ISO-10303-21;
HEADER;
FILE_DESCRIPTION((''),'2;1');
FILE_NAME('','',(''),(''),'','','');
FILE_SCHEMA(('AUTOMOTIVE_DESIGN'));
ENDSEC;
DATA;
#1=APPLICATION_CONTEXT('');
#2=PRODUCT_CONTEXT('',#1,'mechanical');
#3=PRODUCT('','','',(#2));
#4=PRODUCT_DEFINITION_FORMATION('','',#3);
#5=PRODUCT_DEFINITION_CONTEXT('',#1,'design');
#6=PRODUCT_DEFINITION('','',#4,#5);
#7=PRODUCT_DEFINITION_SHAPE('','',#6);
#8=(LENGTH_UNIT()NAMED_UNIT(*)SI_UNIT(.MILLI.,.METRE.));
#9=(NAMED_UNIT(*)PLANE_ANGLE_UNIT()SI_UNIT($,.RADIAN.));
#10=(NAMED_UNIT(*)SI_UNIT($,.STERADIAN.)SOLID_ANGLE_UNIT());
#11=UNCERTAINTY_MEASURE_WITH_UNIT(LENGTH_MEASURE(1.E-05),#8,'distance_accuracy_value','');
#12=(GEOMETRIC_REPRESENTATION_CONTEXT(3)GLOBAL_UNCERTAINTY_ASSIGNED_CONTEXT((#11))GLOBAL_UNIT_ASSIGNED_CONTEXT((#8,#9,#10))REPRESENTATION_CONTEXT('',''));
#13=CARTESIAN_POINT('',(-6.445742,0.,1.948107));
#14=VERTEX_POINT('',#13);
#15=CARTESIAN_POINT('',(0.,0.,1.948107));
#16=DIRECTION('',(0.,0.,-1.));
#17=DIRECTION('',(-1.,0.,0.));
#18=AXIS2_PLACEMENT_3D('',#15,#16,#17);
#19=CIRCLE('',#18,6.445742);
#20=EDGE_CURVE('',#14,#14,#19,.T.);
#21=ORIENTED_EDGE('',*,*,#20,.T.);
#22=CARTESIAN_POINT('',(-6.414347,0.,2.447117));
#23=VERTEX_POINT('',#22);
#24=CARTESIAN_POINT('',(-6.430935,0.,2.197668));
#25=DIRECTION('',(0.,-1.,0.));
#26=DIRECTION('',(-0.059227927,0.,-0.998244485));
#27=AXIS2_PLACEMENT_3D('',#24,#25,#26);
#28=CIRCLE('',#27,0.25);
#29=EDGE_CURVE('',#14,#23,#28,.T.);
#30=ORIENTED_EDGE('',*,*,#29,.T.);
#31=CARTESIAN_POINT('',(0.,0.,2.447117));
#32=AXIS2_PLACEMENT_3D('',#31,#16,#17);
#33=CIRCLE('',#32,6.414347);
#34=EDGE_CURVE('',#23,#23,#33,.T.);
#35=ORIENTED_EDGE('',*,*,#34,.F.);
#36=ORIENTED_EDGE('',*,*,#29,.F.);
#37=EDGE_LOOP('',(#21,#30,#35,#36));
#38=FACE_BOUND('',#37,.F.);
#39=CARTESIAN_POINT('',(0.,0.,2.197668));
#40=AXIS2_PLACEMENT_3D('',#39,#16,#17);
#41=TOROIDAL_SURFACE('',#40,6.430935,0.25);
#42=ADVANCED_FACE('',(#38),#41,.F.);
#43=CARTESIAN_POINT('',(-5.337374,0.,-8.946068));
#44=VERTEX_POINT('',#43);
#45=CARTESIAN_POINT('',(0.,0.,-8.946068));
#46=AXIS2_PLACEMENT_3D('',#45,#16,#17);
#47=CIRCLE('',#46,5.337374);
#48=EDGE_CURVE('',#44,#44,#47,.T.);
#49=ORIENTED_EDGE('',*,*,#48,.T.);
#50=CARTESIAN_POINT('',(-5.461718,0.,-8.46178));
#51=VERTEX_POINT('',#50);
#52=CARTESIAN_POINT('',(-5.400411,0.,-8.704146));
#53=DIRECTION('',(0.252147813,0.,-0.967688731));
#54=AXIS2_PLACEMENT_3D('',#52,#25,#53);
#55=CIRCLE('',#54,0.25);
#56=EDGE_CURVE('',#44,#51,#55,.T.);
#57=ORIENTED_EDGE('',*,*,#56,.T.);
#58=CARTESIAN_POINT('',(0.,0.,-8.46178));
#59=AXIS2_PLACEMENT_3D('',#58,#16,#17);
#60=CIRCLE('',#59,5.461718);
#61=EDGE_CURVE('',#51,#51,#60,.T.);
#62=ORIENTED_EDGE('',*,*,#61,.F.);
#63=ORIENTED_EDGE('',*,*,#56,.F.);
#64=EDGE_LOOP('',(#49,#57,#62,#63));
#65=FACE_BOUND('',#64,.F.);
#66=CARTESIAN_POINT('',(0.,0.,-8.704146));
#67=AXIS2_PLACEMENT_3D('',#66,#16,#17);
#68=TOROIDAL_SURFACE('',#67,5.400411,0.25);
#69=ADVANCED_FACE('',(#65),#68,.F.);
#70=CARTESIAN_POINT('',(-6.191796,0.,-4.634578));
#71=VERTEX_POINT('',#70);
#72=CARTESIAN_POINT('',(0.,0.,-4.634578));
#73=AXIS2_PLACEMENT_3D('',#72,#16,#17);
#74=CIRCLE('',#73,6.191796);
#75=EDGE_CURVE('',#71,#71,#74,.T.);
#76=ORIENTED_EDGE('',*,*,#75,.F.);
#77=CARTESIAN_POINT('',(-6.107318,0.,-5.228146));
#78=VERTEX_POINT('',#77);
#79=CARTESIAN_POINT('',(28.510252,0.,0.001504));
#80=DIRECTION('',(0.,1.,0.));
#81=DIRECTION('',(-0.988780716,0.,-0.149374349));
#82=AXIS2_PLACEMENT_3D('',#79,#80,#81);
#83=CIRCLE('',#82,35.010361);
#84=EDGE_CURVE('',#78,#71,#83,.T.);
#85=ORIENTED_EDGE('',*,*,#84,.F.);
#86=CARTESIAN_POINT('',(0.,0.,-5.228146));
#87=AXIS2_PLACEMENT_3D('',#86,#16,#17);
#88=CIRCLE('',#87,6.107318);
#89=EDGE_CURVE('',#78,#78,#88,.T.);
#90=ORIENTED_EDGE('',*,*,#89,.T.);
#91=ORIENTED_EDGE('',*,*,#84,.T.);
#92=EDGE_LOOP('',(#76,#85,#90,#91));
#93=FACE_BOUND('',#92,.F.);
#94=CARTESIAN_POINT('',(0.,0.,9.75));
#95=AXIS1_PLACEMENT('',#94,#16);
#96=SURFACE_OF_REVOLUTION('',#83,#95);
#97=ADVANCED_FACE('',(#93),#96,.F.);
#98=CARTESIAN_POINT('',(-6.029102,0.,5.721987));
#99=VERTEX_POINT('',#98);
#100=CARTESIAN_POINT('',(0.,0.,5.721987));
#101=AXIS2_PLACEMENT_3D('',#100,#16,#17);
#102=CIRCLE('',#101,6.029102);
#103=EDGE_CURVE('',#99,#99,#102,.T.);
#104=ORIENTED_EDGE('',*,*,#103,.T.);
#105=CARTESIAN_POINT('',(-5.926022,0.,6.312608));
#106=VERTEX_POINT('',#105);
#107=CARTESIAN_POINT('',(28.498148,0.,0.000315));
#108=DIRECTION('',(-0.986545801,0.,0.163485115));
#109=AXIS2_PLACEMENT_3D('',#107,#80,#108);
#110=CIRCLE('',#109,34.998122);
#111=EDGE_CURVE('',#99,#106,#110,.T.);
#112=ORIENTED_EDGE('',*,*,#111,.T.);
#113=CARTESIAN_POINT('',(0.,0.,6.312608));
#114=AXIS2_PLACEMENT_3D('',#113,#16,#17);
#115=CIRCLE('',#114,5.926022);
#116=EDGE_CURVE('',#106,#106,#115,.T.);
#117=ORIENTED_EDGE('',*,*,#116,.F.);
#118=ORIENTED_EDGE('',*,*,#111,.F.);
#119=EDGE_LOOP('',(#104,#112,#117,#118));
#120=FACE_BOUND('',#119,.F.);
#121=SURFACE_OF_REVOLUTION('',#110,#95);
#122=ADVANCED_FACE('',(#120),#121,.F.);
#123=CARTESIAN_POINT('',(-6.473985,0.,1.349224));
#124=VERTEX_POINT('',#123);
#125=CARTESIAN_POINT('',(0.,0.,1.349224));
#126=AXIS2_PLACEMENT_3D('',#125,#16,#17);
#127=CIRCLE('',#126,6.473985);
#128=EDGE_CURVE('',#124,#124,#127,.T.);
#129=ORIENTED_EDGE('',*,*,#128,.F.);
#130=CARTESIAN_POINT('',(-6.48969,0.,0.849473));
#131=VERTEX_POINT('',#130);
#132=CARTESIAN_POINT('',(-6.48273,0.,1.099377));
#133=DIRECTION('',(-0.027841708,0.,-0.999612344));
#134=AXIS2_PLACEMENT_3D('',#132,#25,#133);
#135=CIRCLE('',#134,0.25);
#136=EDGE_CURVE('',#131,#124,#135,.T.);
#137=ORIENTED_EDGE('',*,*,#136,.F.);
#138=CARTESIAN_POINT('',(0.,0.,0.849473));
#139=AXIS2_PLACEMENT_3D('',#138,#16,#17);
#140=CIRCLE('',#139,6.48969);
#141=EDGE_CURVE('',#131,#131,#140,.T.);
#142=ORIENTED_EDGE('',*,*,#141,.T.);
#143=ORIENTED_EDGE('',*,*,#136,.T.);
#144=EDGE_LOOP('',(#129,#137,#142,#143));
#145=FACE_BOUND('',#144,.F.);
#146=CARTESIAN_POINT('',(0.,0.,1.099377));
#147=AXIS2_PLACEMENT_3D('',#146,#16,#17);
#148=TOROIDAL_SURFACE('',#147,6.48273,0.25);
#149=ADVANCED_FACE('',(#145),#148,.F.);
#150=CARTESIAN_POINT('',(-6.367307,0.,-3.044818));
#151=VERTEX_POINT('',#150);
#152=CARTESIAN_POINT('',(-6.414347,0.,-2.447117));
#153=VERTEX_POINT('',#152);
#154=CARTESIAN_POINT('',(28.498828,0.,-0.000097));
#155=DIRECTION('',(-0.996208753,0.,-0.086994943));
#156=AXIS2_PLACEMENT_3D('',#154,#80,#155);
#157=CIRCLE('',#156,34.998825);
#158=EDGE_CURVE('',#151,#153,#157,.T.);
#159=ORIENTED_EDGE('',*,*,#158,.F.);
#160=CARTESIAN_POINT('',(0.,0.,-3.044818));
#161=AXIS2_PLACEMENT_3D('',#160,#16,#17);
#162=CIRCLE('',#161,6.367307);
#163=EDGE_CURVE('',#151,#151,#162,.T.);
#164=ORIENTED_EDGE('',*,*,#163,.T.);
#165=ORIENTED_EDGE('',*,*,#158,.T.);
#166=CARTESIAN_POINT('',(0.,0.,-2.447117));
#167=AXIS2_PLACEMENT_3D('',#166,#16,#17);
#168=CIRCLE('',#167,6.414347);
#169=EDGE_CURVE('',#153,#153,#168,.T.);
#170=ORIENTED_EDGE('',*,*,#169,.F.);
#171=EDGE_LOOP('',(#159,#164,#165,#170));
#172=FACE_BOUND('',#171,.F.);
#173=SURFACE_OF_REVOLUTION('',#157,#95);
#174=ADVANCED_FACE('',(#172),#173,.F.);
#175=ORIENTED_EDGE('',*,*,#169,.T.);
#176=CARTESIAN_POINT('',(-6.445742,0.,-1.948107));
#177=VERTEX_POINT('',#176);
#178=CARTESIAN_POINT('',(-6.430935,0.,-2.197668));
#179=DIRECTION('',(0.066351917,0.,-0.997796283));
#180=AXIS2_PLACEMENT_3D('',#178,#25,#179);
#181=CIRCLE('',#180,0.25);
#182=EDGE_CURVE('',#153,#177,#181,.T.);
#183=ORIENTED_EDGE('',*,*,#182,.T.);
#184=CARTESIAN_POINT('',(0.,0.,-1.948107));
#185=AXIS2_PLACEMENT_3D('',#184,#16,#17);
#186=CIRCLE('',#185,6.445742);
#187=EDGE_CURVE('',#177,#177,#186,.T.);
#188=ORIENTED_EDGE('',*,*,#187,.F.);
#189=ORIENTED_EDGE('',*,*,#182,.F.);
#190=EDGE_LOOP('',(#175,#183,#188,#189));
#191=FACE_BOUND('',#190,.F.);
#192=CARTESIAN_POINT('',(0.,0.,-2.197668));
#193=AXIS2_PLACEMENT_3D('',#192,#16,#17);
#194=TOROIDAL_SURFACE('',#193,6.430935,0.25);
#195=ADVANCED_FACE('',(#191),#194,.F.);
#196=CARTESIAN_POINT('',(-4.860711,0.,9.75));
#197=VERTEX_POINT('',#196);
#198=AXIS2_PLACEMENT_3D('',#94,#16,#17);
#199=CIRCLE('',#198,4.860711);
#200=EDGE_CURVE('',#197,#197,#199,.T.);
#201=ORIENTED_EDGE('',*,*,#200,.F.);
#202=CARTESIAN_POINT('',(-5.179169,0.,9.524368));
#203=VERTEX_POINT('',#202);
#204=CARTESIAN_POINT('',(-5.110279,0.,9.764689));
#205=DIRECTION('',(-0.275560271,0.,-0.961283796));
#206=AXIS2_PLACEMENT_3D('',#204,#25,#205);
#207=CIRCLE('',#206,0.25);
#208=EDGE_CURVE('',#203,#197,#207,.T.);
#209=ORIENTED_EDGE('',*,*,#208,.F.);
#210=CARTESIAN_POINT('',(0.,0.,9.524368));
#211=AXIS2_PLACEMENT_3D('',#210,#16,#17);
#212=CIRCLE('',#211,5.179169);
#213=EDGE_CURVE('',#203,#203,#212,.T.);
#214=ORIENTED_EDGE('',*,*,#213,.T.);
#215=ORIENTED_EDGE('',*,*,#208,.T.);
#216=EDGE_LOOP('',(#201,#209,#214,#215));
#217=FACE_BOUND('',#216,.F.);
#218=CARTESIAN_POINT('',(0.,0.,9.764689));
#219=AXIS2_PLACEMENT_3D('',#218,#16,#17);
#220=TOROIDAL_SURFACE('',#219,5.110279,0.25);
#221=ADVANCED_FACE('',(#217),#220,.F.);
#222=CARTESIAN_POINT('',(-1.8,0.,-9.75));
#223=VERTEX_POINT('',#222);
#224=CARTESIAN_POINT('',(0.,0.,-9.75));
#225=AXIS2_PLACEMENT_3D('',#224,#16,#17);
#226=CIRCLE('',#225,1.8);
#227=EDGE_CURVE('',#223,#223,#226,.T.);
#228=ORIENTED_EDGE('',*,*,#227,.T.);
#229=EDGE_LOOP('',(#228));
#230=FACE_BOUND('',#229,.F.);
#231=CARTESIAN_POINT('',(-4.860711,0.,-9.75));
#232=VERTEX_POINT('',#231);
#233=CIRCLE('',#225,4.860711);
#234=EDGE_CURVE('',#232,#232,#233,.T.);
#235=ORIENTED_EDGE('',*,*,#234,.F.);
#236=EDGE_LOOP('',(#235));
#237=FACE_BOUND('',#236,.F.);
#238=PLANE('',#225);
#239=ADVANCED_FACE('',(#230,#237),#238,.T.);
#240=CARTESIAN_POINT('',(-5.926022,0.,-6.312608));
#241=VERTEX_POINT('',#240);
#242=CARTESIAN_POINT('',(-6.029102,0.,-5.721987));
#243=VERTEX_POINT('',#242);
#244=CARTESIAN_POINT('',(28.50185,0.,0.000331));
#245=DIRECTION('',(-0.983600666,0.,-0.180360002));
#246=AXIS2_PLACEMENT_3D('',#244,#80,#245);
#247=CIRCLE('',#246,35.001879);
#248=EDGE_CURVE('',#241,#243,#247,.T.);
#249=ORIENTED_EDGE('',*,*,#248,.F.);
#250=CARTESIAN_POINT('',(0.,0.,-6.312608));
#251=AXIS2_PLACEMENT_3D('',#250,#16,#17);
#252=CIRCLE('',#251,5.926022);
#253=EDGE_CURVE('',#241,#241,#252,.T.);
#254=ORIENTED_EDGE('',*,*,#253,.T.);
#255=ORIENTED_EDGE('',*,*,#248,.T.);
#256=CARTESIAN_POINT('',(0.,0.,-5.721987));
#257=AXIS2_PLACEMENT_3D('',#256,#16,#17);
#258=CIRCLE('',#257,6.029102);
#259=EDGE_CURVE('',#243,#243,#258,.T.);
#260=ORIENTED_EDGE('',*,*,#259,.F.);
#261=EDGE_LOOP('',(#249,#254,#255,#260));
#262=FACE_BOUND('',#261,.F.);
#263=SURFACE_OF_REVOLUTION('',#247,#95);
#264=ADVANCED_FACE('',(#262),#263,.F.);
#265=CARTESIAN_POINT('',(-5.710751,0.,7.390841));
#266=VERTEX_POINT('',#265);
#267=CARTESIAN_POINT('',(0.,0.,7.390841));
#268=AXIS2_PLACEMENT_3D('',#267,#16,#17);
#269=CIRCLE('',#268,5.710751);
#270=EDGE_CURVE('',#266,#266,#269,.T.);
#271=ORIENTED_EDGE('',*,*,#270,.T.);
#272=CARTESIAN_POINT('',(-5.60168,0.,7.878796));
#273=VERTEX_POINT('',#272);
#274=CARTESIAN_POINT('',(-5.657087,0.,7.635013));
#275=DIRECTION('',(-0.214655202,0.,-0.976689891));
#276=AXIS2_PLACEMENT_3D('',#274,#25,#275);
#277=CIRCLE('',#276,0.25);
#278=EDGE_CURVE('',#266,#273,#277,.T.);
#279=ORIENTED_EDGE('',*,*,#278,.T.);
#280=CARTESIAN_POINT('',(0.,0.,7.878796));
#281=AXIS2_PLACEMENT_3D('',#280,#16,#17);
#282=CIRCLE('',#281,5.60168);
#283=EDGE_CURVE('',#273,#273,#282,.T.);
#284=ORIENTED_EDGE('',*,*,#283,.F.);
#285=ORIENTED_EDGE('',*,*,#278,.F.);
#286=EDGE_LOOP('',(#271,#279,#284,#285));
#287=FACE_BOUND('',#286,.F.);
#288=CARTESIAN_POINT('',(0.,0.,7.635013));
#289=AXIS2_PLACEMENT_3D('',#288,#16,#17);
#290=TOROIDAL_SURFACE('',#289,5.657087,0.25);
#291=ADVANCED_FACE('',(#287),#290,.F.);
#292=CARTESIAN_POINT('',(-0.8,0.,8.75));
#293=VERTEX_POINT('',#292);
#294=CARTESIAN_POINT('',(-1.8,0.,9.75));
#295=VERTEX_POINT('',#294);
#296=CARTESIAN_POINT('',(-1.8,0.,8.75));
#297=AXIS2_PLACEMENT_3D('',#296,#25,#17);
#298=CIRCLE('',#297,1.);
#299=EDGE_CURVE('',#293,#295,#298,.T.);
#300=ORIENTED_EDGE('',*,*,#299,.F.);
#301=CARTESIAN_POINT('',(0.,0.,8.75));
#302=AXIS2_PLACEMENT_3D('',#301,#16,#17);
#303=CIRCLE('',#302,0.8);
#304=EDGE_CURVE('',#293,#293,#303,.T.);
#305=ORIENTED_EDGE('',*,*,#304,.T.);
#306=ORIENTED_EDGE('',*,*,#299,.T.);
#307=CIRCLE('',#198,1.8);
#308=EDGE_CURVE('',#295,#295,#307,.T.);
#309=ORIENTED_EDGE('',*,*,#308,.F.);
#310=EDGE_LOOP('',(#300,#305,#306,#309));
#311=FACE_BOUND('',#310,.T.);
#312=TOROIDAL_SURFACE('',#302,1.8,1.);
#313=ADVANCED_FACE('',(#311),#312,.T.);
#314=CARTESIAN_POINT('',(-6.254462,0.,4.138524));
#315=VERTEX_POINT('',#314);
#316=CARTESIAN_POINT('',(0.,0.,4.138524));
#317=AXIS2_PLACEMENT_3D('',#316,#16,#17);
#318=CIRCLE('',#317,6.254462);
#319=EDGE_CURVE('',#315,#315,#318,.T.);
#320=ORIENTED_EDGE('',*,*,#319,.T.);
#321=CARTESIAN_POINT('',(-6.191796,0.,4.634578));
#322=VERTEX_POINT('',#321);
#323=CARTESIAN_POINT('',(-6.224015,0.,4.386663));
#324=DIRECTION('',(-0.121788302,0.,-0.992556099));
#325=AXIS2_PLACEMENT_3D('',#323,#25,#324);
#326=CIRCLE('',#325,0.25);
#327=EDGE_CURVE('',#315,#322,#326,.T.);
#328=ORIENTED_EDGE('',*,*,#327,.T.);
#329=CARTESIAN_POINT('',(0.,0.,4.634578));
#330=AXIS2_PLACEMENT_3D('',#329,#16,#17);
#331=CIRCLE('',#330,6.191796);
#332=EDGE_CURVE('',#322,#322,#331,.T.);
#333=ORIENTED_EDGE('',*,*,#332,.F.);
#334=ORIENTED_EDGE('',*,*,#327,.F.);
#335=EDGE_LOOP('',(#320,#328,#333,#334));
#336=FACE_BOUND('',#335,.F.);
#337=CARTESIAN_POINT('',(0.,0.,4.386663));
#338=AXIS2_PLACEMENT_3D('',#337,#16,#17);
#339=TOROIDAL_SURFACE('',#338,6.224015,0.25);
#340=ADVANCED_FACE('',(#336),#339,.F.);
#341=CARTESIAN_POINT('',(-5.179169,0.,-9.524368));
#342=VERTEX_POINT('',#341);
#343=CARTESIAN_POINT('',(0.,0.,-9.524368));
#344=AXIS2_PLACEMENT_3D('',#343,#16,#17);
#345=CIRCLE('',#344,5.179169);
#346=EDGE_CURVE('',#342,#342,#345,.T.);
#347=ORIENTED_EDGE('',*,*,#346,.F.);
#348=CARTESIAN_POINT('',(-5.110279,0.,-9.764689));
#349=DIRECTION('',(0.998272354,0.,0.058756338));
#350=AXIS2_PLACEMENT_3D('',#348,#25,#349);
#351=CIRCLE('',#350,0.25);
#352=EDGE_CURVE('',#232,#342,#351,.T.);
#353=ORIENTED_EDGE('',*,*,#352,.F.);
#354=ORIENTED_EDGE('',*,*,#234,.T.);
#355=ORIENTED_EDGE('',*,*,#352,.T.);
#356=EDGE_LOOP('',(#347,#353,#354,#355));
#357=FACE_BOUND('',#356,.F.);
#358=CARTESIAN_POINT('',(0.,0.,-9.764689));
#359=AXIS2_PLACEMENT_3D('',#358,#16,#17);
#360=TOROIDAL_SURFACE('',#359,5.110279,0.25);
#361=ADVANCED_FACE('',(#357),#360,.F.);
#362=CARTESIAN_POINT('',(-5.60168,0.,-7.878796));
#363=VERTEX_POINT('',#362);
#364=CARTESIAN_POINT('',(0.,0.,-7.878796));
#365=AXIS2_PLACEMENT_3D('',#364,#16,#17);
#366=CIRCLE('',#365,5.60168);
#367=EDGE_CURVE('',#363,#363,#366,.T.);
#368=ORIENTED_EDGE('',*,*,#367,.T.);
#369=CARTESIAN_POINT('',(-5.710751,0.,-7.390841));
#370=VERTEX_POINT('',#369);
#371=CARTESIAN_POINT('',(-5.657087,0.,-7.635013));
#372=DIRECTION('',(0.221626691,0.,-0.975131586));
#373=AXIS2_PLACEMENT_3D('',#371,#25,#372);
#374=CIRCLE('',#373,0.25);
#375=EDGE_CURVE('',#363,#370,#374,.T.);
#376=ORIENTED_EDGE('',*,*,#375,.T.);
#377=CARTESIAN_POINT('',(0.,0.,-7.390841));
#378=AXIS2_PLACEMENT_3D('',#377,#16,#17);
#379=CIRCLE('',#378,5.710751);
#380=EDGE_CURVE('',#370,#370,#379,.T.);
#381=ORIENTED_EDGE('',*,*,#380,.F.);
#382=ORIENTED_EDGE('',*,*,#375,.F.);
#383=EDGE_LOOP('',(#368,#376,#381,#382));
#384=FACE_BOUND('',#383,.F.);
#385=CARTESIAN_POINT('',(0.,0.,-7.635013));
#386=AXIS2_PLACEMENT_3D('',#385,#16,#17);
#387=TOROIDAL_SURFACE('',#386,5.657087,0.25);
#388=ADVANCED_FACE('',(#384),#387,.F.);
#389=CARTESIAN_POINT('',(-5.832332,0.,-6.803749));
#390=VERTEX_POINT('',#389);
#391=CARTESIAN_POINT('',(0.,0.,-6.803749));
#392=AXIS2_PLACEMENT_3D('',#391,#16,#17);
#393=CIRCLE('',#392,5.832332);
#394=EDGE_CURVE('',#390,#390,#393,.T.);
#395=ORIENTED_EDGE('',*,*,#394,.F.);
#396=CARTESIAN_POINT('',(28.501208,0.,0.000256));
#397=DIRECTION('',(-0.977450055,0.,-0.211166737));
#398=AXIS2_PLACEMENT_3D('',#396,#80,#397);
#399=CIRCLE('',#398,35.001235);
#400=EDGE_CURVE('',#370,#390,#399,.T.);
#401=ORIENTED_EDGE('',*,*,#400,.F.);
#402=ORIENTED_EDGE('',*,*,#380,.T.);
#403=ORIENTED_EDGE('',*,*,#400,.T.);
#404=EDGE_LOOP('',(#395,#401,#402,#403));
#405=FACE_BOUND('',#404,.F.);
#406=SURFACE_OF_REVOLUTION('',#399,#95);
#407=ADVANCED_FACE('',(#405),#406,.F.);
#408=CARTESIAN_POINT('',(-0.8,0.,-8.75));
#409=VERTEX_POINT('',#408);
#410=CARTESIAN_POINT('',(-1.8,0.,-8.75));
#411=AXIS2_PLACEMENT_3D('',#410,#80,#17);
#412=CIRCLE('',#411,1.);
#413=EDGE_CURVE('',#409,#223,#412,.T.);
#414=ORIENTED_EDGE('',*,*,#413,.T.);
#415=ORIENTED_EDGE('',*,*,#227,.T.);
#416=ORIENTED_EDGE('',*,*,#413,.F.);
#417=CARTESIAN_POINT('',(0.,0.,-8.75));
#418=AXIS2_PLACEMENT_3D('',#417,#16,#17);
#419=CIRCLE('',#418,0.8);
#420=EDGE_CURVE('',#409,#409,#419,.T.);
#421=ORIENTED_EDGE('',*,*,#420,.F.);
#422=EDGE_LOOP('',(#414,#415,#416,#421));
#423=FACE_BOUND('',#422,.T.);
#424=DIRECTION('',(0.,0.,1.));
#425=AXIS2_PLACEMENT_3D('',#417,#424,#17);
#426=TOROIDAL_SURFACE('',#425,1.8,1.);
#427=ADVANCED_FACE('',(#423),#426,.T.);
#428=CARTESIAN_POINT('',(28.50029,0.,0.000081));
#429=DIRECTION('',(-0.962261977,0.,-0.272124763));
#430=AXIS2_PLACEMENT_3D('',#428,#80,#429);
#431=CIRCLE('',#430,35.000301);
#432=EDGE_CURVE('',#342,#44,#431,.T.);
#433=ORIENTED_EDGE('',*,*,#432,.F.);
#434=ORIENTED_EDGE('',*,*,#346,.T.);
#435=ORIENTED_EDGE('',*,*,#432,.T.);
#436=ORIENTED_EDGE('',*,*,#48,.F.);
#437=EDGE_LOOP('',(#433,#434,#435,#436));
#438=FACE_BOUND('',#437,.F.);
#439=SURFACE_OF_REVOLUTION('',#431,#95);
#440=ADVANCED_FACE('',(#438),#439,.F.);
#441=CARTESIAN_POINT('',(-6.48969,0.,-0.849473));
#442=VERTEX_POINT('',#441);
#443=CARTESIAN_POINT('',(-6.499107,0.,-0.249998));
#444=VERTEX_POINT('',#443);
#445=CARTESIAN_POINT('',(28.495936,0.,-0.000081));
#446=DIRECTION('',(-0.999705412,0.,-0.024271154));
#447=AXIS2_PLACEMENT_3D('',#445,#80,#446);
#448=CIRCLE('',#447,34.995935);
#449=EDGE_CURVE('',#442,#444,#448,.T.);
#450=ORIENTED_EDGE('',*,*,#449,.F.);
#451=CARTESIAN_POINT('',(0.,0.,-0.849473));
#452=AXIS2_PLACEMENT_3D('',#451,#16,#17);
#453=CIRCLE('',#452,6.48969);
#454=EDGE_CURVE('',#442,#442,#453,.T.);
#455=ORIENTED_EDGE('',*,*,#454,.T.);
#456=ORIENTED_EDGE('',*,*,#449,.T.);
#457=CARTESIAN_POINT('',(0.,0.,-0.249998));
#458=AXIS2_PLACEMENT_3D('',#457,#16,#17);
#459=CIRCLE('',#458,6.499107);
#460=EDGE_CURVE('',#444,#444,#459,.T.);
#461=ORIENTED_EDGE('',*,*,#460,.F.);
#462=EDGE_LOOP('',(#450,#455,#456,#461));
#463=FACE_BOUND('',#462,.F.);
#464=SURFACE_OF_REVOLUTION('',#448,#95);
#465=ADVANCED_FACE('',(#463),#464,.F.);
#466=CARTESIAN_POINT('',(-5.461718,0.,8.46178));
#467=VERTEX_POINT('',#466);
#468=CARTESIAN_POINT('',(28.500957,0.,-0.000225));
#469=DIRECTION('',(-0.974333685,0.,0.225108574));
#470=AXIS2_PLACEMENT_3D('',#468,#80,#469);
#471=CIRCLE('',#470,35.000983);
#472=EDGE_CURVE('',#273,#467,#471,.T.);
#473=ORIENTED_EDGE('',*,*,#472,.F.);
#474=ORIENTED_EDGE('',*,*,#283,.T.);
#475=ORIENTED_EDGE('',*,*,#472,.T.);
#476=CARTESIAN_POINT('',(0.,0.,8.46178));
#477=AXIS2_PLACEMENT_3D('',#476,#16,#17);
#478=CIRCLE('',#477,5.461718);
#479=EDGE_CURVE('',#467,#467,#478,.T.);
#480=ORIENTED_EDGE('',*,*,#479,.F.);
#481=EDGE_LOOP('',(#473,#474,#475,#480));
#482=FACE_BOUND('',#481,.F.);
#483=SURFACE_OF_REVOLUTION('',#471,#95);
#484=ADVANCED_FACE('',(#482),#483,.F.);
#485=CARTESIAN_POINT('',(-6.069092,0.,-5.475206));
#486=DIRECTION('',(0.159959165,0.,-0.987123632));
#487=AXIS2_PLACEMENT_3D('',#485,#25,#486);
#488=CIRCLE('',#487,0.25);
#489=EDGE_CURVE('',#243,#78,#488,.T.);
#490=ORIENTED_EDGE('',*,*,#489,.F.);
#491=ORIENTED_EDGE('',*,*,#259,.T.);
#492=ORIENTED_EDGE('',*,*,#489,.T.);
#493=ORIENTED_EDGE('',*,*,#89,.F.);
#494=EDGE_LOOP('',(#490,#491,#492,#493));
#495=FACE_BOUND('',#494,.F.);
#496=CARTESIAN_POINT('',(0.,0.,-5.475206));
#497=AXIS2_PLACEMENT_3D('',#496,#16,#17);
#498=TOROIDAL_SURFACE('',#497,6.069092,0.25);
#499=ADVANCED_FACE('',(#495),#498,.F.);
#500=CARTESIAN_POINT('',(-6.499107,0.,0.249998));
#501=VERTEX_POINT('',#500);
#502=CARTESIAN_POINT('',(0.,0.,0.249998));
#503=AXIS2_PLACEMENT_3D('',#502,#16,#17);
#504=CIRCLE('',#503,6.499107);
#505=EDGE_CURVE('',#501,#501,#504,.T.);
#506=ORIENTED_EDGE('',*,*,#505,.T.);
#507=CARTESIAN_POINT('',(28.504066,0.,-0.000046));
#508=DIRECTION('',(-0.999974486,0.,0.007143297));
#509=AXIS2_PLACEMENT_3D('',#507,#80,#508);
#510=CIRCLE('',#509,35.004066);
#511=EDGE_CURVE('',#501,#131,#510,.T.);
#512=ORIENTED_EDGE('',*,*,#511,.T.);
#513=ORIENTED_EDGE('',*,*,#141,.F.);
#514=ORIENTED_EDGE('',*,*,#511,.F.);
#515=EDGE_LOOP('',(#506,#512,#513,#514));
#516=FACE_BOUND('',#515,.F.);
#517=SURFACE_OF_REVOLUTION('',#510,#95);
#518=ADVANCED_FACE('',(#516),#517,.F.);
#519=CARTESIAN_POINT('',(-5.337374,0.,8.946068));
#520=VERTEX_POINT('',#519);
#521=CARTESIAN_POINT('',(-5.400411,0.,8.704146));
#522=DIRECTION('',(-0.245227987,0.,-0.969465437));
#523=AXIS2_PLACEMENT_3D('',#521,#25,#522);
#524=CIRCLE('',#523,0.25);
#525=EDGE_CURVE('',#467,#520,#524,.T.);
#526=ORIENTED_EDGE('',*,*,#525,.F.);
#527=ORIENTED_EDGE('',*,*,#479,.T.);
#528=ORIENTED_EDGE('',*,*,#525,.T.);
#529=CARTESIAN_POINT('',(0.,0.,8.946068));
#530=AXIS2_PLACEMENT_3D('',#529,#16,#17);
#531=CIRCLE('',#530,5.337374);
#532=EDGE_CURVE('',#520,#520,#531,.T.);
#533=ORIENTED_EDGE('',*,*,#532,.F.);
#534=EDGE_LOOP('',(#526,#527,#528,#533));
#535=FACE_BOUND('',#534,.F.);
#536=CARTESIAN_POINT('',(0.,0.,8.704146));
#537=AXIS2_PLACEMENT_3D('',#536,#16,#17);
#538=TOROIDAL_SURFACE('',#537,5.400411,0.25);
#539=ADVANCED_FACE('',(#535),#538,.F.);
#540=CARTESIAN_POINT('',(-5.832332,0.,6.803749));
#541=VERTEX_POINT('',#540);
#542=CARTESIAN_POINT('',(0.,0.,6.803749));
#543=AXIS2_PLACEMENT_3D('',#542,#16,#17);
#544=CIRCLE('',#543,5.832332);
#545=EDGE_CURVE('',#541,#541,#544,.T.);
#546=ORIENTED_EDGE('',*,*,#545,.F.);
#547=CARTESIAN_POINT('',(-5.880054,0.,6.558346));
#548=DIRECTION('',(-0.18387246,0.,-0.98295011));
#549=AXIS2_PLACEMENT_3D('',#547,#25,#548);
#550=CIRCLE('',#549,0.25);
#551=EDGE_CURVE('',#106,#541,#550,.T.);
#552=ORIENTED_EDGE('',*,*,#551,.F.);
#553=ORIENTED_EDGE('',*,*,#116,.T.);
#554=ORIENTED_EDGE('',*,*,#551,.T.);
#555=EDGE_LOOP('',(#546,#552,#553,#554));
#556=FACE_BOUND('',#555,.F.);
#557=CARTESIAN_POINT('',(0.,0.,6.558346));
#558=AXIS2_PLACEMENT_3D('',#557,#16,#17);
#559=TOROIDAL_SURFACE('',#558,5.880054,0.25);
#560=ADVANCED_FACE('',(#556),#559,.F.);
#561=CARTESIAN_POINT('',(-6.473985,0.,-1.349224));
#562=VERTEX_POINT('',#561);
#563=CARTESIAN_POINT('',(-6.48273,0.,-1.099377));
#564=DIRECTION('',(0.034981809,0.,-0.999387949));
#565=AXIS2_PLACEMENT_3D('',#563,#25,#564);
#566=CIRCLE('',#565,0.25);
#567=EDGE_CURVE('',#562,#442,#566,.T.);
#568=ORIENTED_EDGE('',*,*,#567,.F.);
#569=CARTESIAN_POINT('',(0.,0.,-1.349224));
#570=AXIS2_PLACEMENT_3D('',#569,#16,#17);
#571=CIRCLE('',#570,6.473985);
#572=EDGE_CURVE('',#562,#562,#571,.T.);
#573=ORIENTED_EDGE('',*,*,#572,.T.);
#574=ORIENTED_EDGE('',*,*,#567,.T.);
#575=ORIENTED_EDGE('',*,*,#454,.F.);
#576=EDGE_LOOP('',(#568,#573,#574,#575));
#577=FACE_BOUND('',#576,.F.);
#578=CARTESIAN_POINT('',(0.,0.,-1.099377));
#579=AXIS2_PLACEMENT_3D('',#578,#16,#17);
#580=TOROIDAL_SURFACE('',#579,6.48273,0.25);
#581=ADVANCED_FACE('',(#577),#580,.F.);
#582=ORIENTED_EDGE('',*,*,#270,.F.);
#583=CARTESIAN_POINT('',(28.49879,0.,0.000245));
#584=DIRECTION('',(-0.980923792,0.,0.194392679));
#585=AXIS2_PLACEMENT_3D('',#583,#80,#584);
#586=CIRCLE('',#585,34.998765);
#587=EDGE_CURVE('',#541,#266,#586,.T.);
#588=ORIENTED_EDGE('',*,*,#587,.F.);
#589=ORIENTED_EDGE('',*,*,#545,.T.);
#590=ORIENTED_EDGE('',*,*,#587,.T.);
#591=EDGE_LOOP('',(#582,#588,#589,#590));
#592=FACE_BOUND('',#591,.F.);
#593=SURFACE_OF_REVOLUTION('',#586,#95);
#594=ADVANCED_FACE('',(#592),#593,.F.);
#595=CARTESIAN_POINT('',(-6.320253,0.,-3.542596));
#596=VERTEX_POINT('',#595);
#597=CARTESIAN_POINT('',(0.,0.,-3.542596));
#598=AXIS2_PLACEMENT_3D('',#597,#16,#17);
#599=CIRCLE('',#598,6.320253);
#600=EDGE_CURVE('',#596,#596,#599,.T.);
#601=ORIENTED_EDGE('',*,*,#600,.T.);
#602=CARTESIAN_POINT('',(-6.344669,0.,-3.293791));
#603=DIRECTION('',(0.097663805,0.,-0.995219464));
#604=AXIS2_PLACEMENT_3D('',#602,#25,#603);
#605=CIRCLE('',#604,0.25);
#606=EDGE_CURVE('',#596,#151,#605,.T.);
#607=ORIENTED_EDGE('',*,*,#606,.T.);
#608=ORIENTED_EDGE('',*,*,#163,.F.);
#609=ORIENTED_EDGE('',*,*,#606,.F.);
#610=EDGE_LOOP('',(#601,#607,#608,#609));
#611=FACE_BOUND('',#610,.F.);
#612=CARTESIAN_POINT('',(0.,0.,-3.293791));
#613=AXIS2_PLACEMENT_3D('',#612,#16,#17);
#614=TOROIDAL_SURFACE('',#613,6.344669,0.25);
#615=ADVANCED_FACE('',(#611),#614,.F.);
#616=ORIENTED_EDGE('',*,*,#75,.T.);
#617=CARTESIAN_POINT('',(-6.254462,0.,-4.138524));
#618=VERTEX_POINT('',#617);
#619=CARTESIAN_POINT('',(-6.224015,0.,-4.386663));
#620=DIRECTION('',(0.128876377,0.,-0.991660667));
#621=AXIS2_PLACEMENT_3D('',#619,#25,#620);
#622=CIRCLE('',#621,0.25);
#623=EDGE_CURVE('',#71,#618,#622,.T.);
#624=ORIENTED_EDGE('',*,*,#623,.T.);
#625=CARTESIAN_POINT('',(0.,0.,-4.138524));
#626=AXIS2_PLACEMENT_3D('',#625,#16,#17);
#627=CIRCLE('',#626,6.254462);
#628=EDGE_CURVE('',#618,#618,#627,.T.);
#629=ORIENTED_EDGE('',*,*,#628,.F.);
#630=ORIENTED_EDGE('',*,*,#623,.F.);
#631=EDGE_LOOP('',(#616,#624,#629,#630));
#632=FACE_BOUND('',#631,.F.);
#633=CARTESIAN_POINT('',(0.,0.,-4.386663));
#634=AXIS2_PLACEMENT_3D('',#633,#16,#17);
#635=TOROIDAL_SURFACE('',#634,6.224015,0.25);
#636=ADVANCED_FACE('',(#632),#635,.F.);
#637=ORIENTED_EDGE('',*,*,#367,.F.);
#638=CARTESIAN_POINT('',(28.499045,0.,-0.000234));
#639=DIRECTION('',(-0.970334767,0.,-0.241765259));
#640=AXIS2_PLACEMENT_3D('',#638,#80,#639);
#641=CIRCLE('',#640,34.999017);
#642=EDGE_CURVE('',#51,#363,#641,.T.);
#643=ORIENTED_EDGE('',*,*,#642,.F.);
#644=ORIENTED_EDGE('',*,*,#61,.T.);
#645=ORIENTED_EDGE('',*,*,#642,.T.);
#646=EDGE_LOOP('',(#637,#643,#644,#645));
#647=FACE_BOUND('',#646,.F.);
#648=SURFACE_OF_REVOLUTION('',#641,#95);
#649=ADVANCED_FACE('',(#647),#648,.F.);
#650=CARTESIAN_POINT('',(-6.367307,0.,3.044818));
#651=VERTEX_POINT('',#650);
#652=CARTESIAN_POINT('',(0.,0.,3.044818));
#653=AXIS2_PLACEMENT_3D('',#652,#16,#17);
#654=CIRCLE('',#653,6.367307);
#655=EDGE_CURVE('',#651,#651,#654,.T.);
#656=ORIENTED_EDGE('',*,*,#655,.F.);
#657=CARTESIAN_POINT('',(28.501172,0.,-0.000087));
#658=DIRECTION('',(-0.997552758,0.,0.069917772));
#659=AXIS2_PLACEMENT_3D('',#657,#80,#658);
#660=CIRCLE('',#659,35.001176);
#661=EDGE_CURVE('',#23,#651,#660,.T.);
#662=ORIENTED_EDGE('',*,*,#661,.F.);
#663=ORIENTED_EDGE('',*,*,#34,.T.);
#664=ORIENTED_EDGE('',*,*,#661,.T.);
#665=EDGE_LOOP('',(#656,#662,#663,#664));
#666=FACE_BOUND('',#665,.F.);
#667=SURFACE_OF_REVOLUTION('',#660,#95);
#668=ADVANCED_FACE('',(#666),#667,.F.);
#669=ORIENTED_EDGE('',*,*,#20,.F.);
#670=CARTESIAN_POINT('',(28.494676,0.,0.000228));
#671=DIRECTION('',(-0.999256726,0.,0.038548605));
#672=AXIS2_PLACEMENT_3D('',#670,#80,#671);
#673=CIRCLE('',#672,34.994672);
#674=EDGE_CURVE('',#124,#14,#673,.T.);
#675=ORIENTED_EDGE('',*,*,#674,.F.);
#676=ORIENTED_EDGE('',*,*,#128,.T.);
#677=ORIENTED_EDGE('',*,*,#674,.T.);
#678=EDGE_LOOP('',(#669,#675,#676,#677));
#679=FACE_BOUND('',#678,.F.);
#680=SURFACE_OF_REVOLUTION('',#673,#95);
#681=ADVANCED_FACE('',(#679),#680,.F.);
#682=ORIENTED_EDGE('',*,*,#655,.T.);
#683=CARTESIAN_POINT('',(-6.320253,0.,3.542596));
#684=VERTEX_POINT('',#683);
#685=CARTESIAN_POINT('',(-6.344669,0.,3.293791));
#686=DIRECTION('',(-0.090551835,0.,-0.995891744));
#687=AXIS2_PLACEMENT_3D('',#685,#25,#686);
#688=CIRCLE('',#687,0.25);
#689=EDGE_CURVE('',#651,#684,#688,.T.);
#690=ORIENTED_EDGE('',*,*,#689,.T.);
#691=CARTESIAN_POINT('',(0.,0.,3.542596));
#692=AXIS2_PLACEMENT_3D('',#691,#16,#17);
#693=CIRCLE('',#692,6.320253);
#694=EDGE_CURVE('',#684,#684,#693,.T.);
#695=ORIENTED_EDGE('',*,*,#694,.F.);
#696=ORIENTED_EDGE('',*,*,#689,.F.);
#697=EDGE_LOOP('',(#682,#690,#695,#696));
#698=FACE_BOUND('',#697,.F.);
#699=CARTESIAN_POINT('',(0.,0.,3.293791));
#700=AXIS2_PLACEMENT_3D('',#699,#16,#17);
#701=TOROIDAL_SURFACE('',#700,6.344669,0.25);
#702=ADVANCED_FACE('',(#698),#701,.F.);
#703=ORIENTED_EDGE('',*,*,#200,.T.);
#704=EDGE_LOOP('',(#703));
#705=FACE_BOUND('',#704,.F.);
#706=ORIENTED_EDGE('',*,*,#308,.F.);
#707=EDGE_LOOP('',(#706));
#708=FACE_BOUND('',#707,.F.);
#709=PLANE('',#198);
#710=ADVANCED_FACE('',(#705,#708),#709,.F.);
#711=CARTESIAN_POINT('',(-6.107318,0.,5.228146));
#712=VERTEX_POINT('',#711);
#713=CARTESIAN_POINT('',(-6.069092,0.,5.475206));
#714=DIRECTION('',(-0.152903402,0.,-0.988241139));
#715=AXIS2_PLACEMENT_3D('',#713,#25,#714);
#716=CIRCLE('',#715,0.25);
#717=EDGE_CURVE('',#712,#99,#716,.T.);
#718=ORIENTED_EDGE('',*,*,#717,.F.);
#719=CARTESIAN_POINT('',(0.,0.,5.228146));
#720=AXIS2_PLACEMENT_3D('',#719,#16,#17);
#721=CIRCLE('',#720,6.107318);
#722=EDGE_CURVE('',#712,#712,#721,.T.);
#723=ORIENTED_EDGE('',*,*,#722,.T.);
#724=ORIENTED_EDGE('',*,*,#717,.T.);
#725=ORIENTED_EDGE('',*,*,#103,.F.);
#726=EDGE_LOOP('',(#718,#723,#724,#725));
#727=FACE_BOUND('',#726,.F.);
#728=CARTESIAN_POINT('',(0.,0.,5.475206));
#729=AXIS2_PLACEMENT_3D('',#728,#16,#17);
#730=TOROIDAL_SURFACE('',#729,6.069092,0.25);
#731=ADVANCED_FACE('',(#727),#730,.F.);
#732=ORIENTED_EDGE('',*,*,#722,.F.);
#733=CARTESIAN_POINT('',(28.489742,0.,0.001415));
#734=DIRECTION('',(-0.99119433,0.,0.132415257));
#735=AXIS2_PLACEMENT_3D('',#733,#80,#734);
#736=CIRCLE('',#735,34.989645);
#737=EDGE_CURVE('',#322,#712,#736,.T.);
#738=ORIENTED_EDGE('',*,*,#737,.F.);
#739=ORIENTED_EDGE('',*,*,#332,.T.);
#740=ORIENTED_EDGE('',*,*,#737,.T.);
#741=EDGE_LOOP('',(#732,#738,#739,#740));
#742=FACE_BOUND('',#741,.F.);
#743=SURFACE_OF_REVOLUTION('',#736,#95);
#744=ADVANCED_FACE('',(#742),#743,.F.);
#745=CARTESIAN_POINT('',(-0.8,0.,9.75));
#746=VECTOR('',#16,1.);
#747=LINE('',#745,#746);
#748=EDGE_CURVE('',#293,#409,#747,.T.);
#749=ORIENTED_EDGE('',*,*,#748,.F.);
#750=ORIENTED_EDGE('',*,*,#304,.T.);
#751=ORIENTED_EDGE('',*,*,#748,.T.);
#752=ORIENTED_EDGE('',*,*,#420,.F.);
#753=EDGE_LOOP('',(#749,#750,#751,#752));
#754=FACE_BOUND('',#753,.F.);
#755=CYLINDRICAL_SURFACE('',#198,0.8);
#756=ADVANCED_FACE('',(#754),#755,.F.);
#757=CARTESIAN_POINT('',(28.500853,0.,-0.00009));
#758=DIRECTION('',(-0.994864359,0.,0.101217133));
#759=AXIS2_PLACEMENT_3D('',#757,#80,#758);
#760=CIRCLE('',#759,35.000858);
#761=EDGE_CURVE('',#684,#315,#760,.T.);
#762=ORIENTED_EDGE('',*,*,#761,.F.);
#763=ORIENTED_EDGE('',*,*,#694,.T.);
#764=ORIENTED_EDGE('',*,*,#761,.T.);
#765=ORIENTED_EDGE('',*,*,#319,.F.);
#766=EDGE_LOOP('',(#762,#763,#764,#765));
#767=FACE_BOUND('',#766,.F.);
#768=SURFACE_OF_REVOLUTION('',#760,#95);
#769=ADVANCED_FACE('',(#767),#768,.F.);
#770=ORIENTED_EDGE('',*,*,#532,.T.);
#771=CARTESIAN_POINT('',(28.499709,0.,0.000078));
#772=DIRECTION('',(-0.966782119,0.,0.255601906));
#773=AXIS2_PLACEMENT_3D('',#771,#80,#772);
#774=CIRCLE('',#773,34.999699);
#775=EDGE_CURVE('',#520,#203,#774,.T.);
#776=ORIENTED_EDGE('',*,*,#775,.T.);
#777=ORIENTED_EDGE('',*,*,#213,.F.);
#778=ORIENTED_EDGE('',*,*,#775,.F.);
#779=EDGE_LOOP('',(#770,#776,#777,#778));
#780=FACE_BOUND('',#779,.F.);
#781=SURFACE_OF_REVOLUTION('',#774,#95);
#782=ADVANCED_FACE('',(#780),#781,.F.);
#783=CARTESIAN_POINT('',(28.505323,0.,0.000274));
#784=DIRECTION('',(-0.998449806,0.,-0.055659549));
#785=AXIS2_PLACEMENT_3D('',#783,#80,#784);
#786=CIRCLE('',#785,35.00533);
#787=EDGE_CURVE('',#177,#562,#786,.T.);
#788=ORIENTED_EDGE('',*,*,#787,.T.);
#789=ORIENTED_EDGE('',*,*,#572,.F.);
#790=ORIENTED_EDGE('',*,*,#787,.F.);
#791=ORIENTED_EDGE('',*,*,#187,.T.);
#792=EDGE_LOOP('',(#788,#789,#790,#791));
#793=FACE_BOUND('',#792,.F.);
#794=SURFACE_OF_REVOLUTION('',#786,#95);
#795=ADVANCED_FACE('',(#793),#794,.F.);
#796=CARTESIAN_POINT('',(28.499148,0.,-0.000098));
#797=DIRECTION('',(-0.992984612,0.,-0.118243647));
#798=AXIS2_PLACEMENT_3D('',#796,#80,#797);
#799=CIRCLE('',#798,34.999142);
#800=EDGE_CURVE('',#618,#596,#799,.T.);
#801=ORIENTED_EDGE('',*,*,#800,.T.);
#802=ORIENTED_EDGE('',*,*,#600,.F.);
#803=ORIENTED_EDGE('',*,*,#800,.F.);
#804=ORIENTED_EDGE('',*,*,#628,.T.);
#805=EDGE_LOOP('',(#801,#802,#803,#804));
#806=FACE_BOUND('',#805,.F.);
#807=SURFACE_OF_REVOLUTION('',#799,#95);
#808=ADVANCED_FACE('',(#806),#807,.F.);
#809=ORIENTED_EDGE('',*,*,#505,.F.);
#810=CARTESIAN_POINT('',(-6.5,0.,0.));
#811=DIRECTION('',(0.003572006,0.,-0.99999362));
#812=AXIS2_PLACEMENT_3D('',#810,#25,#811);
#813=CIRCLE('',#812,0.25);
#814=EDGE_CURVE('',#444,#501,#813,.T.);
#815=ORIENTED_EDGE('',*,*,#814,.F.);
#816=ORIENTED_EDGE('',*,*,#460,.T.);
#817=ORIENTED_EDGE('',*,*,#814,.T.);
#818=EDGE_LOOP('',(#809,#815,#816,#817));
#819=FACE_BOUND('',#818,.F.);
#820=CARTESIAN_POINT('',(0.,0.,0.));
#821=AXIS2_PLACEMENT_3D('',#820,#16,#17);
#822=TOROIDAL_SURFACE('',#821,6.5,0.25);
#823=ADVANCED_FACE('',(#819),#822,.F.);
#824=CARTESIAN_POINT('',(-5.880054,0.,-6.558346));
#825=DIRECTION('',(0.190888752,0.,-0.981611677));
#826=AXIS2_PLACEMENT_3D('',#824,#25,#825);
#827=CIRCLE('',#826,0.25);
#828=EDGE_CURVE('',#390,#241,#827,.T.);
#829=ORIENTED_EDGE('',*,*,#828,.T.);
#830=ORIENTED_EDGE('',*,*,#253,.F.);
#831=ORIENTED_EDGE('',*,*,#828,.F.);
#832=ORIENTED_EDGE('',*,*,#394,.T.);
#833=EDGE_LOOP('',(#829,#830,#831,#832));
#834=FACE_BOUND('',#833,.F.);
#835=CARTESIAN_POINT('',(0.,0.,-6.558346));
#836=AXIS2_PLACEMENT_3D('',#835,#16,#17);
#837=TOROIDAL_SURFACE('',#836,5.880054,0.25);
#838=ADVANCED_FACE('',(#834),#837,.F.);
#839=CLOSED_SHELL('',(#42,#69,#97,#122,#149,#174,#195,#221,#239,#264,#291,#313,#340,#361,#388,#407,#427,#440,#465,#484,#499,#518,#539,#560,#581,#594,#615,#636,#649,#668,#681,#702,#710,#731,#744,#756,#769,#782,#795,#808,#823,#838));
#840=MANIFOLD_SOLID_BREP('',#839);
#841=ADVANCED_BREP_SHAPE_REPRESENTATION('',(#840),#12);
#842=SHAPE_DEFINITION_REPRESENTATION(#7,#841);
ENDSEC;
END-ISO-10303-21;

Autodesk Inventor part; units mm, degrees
ref_plane "YZ Plane" through (0, 0, 0) normal (1, 0, 0) x (0, 1, 0)
ref_plane "XZ Plane" through (0, 0, 0) normal (0, 1, 0) x (-1, 0, 0)
ref_plane "XY Plane" through (0, 0, 0) normal (0, 0, 1) x (1, 0, 0)
sketch "Sketch1" plane through (0, 0, 0) normal (0, 1, 0) x (-1, 0, 0)
  line L0 (6.5, 9.75) -> (0, 9.75)
  line L1 (0, 9.75) -> (0, -9.75)
  line L2 (0, -9.75) -> (6.5, -9.75)
  line L3 (6.5, -9.75) -> (6.5, 9.75)
  line L4 (0.8, 9.75) -> (0.8, -9.75)
  arc A0 (5.114543, -9.75) -> (5.114543, 9.75) centre (-28.5, 0) ccw
  circle A1 centre (6.5, 0) radius 0.25
  circle A2 centre (6.48273, 1.099377) radius 0.25
  circle A3 centre (6.430935, 2.197668) radius 0.25
  circle A4 centre (6.344669, 3.293791) radius 0.25
  circle A5 centre (6.224015, 4.386663) radius 0.25
  circle A6 centre (6.069092, 5.475206) radius 0.25
  circle A7 centre (5.880054, 6.558346) radius 0.25
  circle A8 centre (5.657087, 7.635013) radius 0.25
  circle A9 centre (5.400411, 8.704146) radius 0.25
  circle A10 centre (5.110279, 9.764689) radius 0.25
  circle A11 centre (4.786978, 10.815595) radius 0.25
  circle A12 centre (4.430827, 11.855827) radius 0.25
  circle A13 centre (4.042177, 12.884359) radius 0.25
  circle A14 centre (3.621412, 13.900176) radius 0.25
  circle A15 centre (3.168947, 14.902275) radius 0.25
  circle A16 centre (2.685228, 15.889667) radius 0.25
  circle A17 centre (2.170734, 16.861379) radius 0.25
  circle A18 centre (1.625971, 17.81645) radius 0.25
  circle A19 centre (1.051477, 18.753938) radius 0.25
  circle A20 centre (0.44782, 19.672918) radius 0.25
  circle A21 centre (-0.184405, 20.572484) radius 0.25
  circle A22 centre (-0.844575, 21.451747) radius 0.25
  circle A23 centre (-1.532037, 22.30984) radius 0.25
  circle A24 centre (-2.246113, 23.145915) radius 0.25
  circle A25 centre (-2.986098, 23.959149) radius 0.25
  circle A26 centre (-3.751263, 24.748737) radius 0.25
  circle A27 centre (-4.540851, 25.513902) radius 0.25
  circle A28 centre (-5.354085, 26.253887) radius 0.25
  circle A29 centre (-6.19016, 26.967963) radius 0.25
  circle A30 centre (-7.048253, 27.655425) radius 0.25
  circle A31 centre (-7.927516, 28.315595) radius 0.25
  circle A32 centre (-8.827082, 28.94782) radius 0.25
  circle A33 centre (-9.746062, 29.551477) radius 0.25
  circle A34 centre (-10.68355, 30.125971) radius 0.25
  circle A35 centre (-11.638621, 30.670734) radius 0.25
  circle A36 centre (-12.610333, 31.185228) radius 0.25
  circle A37 centre (-13.597725, 31.668947) radius 0.25
  circle A38 centre (-14.599824, 32.121412) radius 0.25
  circle A39 centre (-15.615641, 32.542177) radius 0.25
  circle A40 centre (-16.644173, 32.930827) radius 0.25
  circle A41 centre (-17.684405, 33.286978) radius 0.25
  circle A42 centre (-18.735311, 33.610279) radius 0.25
  circle A43 centre (-19.795854, 33.900411) radius 0.25
  circle A44 centre (-20.864987, 34.157087) radius 0.25
  circle A45 centre (-21.941654, 34.380054) radius 0.25
  circle A46 centre (-23.024794, 34.569092) radius 0.25
  circle A47 centre (-24.113337, 34.724015) radius 0.25
  circle A48 centre (-25.206209, 34.844669) radius 0.25
  circle A49 centre (-26.302332, 34.930935) radius 0.25
  circle A50 centre (-27.400623, 34.98273) radius 0.25
  circle A51 centre (-28.5, 35) radius 0.25
  circle A52 centre (-29.599377, 34.98273) radius 0.25
  circle A53 centre (-30.697668, 34.930935) radius 0.25
  circle A54 centre (-31.793791, 34.844669) radius 0.25
  circle A55 centre (-32.886663, 34.724015) radius 0.25
  circle A56 centre (-33.975206, 34.569092) radius 0.25
  circle A57 centre (-35.058346, 34.380054) radius 0.25
  circle A58 centre (-36.135013, 34.157087) radius 0.25
  circle A59 centre (-37.204146, 33.900411) radius 0.25
  circle A60 centre (-38.264689, 33.610279) radius 0.25
  circle A61 centre (-39.315595, 33.286978) radius 0.25
  circle A62 centre (-40.355827, 32.930827) radius 0.25
  circle A63 centre (-41.384359, 32.542177) radius 0.25
  circle A64 centre (-42.400176, 32.121412) radius 0.25
  circle A65 centre (-43.402275, 31.668947) radius 0.25
  circle A66 centre (-44.389667, 31.185228) radius 0.25
  circle A67 centre (-45.361379, 30.670734) radius 0.25
  circle A68 centre (-46.31645, 30.125971) radius 0.25
  circle A69 centre (-47.253938, 29.551477) radius 0.25
  circle A70 centre (-48.172918, 28.94782) radius 0.25
  circle A71 centre (-49.072484, 28.315595) radius 0.25
  circle A72 centre (-49.951747, 27.655425) radius 0.25
  circle A73 centre (-50.80984, 26.967963) radius 0.25
  circle A74 centre (-51.645915, 26.253887) radius 0.25
  circle A75 centre (-52.459149, 25.513902) radius 0.25
  circle A76 centre (-53.248737, 24.748737) radius 0.25
  circle A77 centre (-54.013902, 23.959149) radius 0.25
  circle A78 centre (-54.753887, 23.145915) radius 0.25
  circle A79 centre (-55.467963, 22.30984) radius 0.25
  circle A80 centre (-56.155425, 21.451747) radius 0.25
  circle A81 centre (-56.815595, 20.572484) radius 0.25
  circle A82 centre (-57.44782, 19.672918) radius 0.25
  circle A83 centre (-58.051477, 18.753938) radius 0.25
  circle A84 centre (-58.625971, 17.81645) radius 0.25
  circle A85 centre (-59.170734, 16.861379) radius 0.25
  circle A86 centre (-59.685228, 15.889667) radius 0.25
  circle A87 centre (-60.168947, 14.902275) radius 0.25
  circle A88 centre (-60.621412, 13.900176) radius 0.25
  circle A89 centre (-61.042177, 12.884359) radius 0.25
  circle A90 centre (-61.430827, 11.855827) radius 0.25
  circle A91 centre (-61.786978, 10.815595) radius 0.25
  circle A92 centre (-62.110279, 9.764689) radius 0.25
  circle A93 centre (-62.400411, 8.704146) radius 0.25
  circle A94 centre (-62.657087, 7.635013) radius 0.25
  circle A95 centre (-62.880054, 6.558346) radius 0.25
  circle A96 centre (-63.069092, 5.475206) radius 0.25
  circle A97 centre (-63.224015, 4.386663) radius 0.25
  circle A98 centre (-63.344669, 3.293791) radius 0.25
  circle A99 centre (-63.430935, 2.197668) radius 0.25
  circle A100 centre (-63.48273, 1.099377) radius 0.25
  circle A101 centre (-63.5, 0) radius 0.25
  circle A102 centre (-63.48273, -1.099377) radius 0.25
  circle A103 centre (-63.430935, -2.197668) radius 0.25
  circle A104 centre (-63.344669, -3.293791) radius 0.25
  circle A105 centre (-63.224015, -4.386663) radius 0.25
  circle A106 centre (-63.069092, -5.475206) radius 0.25
  circle A107 centre (-62.880054, -6.558346) radius 0.25
  circle A108 centre (-62.657087, -7.635013) radius 0.25
  circle A109 centre (-62.400411, -8.704146) radius 0.25
  circle A110 centre (-62.110279, -9.764689) radius 0.25
  circle A111 centre (-61.786978, -10.815595) radius 0.25
  circle A112 centre (-61.430827, -11.855827) radius 0.25
  circle A113 centre (-61.042177, -12.884359) radius 0.25
  circle A114 centre (-60.621412, -13.900176) radius 0.25
  circle A115 centre (-60.168947, -14.902275) radius 0.25
  circle A116 centre (-59.685228, -15.889667) radius 0.25
  circle A117 centre (-59.170734, -16.861379) radius 0.25
  circle A118 centre (-58.625971, -17.81645) radius 0.25
  circle A119 centre (-58.051477, -18.753938) radius 0.25
  circle A120 centre (-57.44782, -19.672918) radius 0.25
  circle A121 centre (-56.815595, -20.572484) radius 0.25
  circle A122 centre (-56.155425, -21.451747) radius 0.25
  circle A123 centre (-55.467963, -22.30984) radius 0.25
  circle A124 centre (-54.753887, -23.145915) radius 0.25
  circle A125 centre (-54.013902, -23.959149) radius 0.25
  circle A126 centre (-53.248737, -24.748737) radius 0.25
  circle A127 centre (-52.459149, -25.513902) radius 0.25
  circle A128 centre (-51.645915, -26.253887) radius 0.25
  circle A129 centre (-50.80984, -26.967963) radius 0.25
  circle A130 centre (-49.951747, -27.655425) radius 0.25
  circle A131 centre (-49.072484, -28.315595) radius 0.25
  circle A132 centre (-48.172918, -28.94782) radius 0.25
  circle A133 centre (-47.253938, -29.551477) radius 0.25
  circle A134 centre (-46.31645, -30.125971) radius 0.25
  circle A135 centre (-45.361379, -30.670734) radius 0.25
  circle A136 centre (-44.389667, -31.185228) radius 0.25
  circle A137 centre (-43.402275, -31.668947) radius 0.25
  circle A138 centre (-42.400176, -32.121412) radius 0.25
  circle A139 centre (-41.384359, -32.542177) radius 0.25
  circle A140 centre (-40.355827, -32.930827) radius 0.25
  circle A141 centre (-39.315595, -33.286978) radius 0.25
  circle A142 centre (-38.264689, -33.610279) radius 0.25
  circle A143 centre (-37.204146, -33.900411) radius 0.25
  circle A144 centre (-36.135013, -34.157087) radius 0.25
  circle A145 centre (-35.058346, -34.380054) radius 0.25
  circle A146 centre (-33.975206, -34.569092) radius 0.25
  circle A147 centre (-32.886663, -34.724015) radius 0.25
  circle A148 centre (-31.793791, -34.844669) radius 0.25
  circle A149 centre (-30.697668, -34.930935) radius 0.25
  circle A150 centre (-29.599377, -34.98273) radius 0.25
  circle A151 centre (-28.5, -35) radius 0.25
  circle A152 centre (-27.400623, -34.98273) radius 0.25
  circle A153 centre (-26.302332, -34.930935) radius 0.25
  circle A154 centre (-25.206209, -34.844669) radius 0.25
  circle A155 centre (-24.113337, -34.724015) radius 0.25
  circle A156 centre (-23.024794, -34.569092) radius 0.25
  circle A157 centre (-21.941654, -34.380054) radius 0.25
  circle A158 centre (-20.864987, -34.157087) radius 0.25
  circle A159 centre (-19.795854, -33.900411) radius 0.25
  circle A160 centre (-18.735311, -33.610279) radius 0.25
  circle A161 centre (-17.684405, -33.286978) radius 0.25
  circle A162 centre (-16.644173, -32.930827) radius 0.25
  circle A163 centre (-15.615641, -32.542177) radius 0.25
  circle A164 centre (-14.599824, -32.121412) radius 0.25
  circle A165 centre (-13.597725, -31.668947) radius 0.25
  circle A166 centre (-12.610333, -31.185228) radius 0.25
  circle A167 centre (-11.638621, -30.670734) radius 0.25
  circle A168 centre (-10.68355, -30.125971) radius 0.25
  circle A169 centre (-9.746062, -29.551477) radius 0.25
  circle A170 centre (-8.827082, -28.94782) radius 0.25
  circle A171 centre (-7.927516, -28.315595) radius 0.25
  circle A172 centre (-7.048253, -27.655425) radius 0.25
  circle A173 centre (-6.19016, -26.967963) radius 0.25
  circle A174 centre (-5.354085, -26.253887) radius 0.25
  circle A175 centre (-4.540851, -25.513902) radius 0.25
  circle A176 centre (-3.751263, -24.748737) radius 0.25
  circle A177 centre (-2.986098, -23.959149) radius 0.25
  circle A178 centre (-2.246113, -23.145915) radius 0.25
  circle A179 centre (-1.532037, -22.30984) radius 0.25
  circle A180 centre (-0.844575, -21.451747) radius 0.25
  circle A181 centre (-0.184405, -20.572484) radius 0.25
  circle A182 centre (0.44782, -19.672918) radius 0.25
  circle A183 centre (1.051477, -18.753938) radius 0.25
  circle A184 centre (1.625971, -17.81645) radius 0.25
  circle A185 centre (2.170734, -16.861379) radius 0.25
  circle A186 centre (2.685228, -15.889667) radius 0.25
  circle A187 centre (3.168947, -14.902275) radius 0.25
  circle A188 centre (3.621412, -13.900176) radius 0.25
  circle A189 centre (4.042177, -12.884359) radius 0.25
  circle A190 centre (4.430827, -11.855827) radius 0.25
  circle A191 centre (4.786978, -10.815595) radius 0.25
  circle A192 centre (5.110279, -9.764689) radius 0.25
  circle A193 centre (5.400411, -8.704146) radius 0.25
  circle A194 centre (5.657087, -7.635013) radius 0.25
  circle A195 centre (5.880054, -6.558346) radius 0.25
  circle A196 centre (6.069092, -5.475206) radius 0.25
  circle A197 centre (6.224015, -4.386663) radius 0.25
  circle A198 centre (6.344669, -3.293791) radius 0.25
  circle A199 centre (6.430935, -2.197668) radius 0.25
  circle A200 centre (6.48273, -1.099377) radius 0.25
  point P0 (0, 0)
  point P1 (6.473985, -1.349224)
  point P2 (6.48969, -0.849473)
  point P3 (6.499107, -0.249998)
  point P4 (6.499107, 0.249998)
  point P5 (6.48969, 0.849473)
  point P6 (6.473985, 1.349224)
  point P7 (6.445742, 1.948107)
  point P8 (6.414347, 2.447117)
  point P9 (6.367307, 3.044818)
  point P10 (6.320253, 3.542596)
  point P11 (6.254462, 4.138524)
  point P12 (6.191796, 4.634578)
  point P13 (6.107318, 5.228146)
  point P14 (6.029102, 5.721987)
  point P15 (5.926022, 6.312608)
  point P16 (5.832332, 6.803749)
  point P17 (5.710751, 7.390841)
  point P18 (5.60168, 7.878796)
  point P19 (5.461718, 8.46178)
  point P20 (5.337374, 8.946068)
  point P21 (5.179169, 9.524368)
  point P22 (4.860711, 9.75)
  point P23 (4.860711, -9.75)
  point P24 (5.179169, -9.524368)
  point P25 (5.337374, -8.946068)
  point P26 (5.461718, -8.46178)
  point P27 (5.60168, -7.878796)
  point P28 (5.710751, -7.390841)
  point P29 (5.832332, -6.803749)
  point P30 (5.926022, -6.312608)
  point P31 (6.029102, -5.721987)
  point P32 (6.107318, -5.228146)
  point P33 (6.191796, -4.634578)
  point P34 (6.254462, -4.138524)
  point P35 (6.320253, -3.542596)
  point P36 (6.367307, -3.044818)
  point P37 (6.414347, -2.447117)
  point P38 (6.445742, -1.948107)
  point P39 (6.5, -0.849974)
  point P40 (6.5, -1.348779)
  point P41 (6.5, -1.957397)
  point P42 (6.5, -2.437939)
  point P43 (6.5, -3.097903)
  point P44 (6.5, -3.489679)
  point P45 (5.359847, -9.75)
  point P46 (6.5, -0.25)
  point P47 (5.359847, 9.75)
  point P48 (6.5, 3.489679)
  point P49 (6.5, 3.097903)
  point P50 (6.5, 2.437939)
  point P51 (6.5, 1.957397)
  point P52 (6.5, 1.348779)
  point P53 (6.5, 0.849974)
  point P54 (6.5, 0.25)
  dimension "d3" = 35
  dimension "d0" = 6.5
  dimension "d1" = 19.5
  dimension "d2" = 0.8
  dimension "d5" = 0.5
  dimension "d8" = 360
sketch "Sketch1 outline for Revolution1" plane through (0, 0, 0) normal (0, 1, 0) x (-1, 0, 0)
  arc A0 (6.473985, -1.349224) -> (6.48969, -0.849473) centre (6.48273, -1.099377) cw
  arc A1 (6.445742, -1.948107) -> (6.473985, -1.349224) centre (-28.5, 0) ccw
  arc A2 (6.414347, -2.447117) -> (6.445742, -1.948107) centre (6.430935, -2.197668) cw
  arc A3 (6.367307, -3.044818) -> (6.414347, -2.447117) centre (-28.5, 0) ccw
  arc A4 (6.320253, -3.542596) -> (6.367307, -3.044818) centre (6.344669, -3.293791) cw
  arc A5 (6.254462, -4.138524) -> (6.320253, -3.542596) centre (-28.5, 0) ccw
  arc A6 (6.191796, -4.634578) -> (6.254462, -4.138524) centre (6.224015, -4.386663) cw
  arc A7 (6.107318, -5.228146) -> (6.191796, -4.634578) centre (-28.5, 0) ccw
  arc A8 (6.029102, -5.721987) -> (6.107318, -5.228146) centre (6.069092, -5.475206) cw
  arc A9 (5.926022, -6.312608) -> (6.029102, -5.721987) centre (-28.5, 0) ccw
  arc A10 (5.832332, -6.803749) -> (5.926022, -6.312608) centre (5.880054, -6.558346) cw
  arc A11 (5.710751, -7.390841) -> (5.832332, -6.803749) centre (-28.5, 0) ccw
  arc A12 (5.60168, -7.878796) -> (5.710751, -7.390841) centre (5.657087, -7.635013) cw
  arc A13 (5.461718, -8.46178) -> (5.60168, -7.878796) centre (-28.5, 0) ccw
  arc A14 (5.337374, -8.946068) -> (5.461718, -8.46178) centre (5.400411, -8.704146) cw
  arc A15 (5.179169, -9.524368) -> (5.337374, -8.946068) centre (-28.5, 0) ccw
  arc A16 (4.860711, -9.75) -> (5.179169, -9.524368) centre (5.110279, -9.764689) cw
  line L0 (0.8, -9.75) -> (4.860711, -9.75)
  line L1 (0.8, 9.75) -> (0.8, -9.75)
  line L2 (4.860711, 9.75) -> (0.8, 9.75)
  arc A17 (5.179169, 9.524368) -> (4.860711, 9.75) centre (5.110279, 9.764689) cw
  arc A18 (5.337374, 8.946068) -> (5.179169, 9.524368) centre (-28.5, 0) ccw
  arc A19 (5.461718, 8.46178) -> (5.337374, 8.946068) centre (5.400411, 8.704146) cw
  arc A20 (5.60168, 7.878796) -> (5.461718, 8.46178) centre (-28.5, 0) ccw
  arc A21 (5.710751, 7.390841) -> (5.60168, 7.878796) centre (5.657087, 7.635013) cw
  arc A22 (5.832332, 6.803749) -> (5.710751, 7.390841) centre (-28.5, 0) ccw
  arc A23 (5.926022, 6.312608) -> (5.832332, 6.803749) centre (5.880054, 6.558346) cw
  arc A24 (6.029102, 5.721987) -> (5.926022, 6.312608) centre (-28.5, 0) ccw
  arc A25 (6.107318, 5.228146) -> (6.029102, 5.721987) centre (6.069092, 5.475206) cw
  arc A26 (6.191796, 4.634578) -> (6.107318, 5.228146) centre (-28.5, 0) ccw
  arc A27 (6.254462, 4.138524) -> (6.191796, 4.634578) centre (6.224015, 4.386663) cw
  arc A28 (6.320253, 3.542596) -> (6.254462, 4.138524) centre (-28.5, 0) ccw
  arc A29 (6.367307, 3.044818) -> (6.320253, 3.542596) centre (6.344669, 3.293791) cw
  arc A30 (6.414347, 2.447117) -> (6.367307, 3.044818) centre (-28.5, 0) ccw
  arc A31 (6.445742, 1.948107) -> (6.414347, 2.447117) centre (6.430935, 2.197668) cw
  arc A32 (6.473985, 1.349224) -> (6.445742, 1.948107) centre (-28.5, 0) ccw
  arc A33 (6.48969, 0.849473) -> (6.473985, 1.349224) centre (6.48273, 1.099377) cw
  arc A34 (6.499107, 0.249998) -> (6.48969, 0.849473) centre (-28.5, 0) ccw
  arc A35 (6.499107, -0.249998) -> (6.499107, 0.249998) centre (6.5, 0) cw
  arc A36 (6.48969, -0.849473) -> (6.499107, -0.249998) centre (-28.5, 0) ccw
revolve "Revolution1" add sketch "Sketch1 outline for Revolution1" angle 360 about axis through (0, 0, 9.75) along (0, 0, -1)
sketch "Sketch4" plane through (0, 0, 9.75) normal (0, 0, 1) x (1, 0, 0)
  point P0 (0, 0)
fillet "Fillet1" radius 1 1 edges at (0.8, 0, 9.75)
fillet "Fillet2" radius 1 1 edges at (0.8, 0, -9.75)
properties part number "roller-5" material "Rubber"
